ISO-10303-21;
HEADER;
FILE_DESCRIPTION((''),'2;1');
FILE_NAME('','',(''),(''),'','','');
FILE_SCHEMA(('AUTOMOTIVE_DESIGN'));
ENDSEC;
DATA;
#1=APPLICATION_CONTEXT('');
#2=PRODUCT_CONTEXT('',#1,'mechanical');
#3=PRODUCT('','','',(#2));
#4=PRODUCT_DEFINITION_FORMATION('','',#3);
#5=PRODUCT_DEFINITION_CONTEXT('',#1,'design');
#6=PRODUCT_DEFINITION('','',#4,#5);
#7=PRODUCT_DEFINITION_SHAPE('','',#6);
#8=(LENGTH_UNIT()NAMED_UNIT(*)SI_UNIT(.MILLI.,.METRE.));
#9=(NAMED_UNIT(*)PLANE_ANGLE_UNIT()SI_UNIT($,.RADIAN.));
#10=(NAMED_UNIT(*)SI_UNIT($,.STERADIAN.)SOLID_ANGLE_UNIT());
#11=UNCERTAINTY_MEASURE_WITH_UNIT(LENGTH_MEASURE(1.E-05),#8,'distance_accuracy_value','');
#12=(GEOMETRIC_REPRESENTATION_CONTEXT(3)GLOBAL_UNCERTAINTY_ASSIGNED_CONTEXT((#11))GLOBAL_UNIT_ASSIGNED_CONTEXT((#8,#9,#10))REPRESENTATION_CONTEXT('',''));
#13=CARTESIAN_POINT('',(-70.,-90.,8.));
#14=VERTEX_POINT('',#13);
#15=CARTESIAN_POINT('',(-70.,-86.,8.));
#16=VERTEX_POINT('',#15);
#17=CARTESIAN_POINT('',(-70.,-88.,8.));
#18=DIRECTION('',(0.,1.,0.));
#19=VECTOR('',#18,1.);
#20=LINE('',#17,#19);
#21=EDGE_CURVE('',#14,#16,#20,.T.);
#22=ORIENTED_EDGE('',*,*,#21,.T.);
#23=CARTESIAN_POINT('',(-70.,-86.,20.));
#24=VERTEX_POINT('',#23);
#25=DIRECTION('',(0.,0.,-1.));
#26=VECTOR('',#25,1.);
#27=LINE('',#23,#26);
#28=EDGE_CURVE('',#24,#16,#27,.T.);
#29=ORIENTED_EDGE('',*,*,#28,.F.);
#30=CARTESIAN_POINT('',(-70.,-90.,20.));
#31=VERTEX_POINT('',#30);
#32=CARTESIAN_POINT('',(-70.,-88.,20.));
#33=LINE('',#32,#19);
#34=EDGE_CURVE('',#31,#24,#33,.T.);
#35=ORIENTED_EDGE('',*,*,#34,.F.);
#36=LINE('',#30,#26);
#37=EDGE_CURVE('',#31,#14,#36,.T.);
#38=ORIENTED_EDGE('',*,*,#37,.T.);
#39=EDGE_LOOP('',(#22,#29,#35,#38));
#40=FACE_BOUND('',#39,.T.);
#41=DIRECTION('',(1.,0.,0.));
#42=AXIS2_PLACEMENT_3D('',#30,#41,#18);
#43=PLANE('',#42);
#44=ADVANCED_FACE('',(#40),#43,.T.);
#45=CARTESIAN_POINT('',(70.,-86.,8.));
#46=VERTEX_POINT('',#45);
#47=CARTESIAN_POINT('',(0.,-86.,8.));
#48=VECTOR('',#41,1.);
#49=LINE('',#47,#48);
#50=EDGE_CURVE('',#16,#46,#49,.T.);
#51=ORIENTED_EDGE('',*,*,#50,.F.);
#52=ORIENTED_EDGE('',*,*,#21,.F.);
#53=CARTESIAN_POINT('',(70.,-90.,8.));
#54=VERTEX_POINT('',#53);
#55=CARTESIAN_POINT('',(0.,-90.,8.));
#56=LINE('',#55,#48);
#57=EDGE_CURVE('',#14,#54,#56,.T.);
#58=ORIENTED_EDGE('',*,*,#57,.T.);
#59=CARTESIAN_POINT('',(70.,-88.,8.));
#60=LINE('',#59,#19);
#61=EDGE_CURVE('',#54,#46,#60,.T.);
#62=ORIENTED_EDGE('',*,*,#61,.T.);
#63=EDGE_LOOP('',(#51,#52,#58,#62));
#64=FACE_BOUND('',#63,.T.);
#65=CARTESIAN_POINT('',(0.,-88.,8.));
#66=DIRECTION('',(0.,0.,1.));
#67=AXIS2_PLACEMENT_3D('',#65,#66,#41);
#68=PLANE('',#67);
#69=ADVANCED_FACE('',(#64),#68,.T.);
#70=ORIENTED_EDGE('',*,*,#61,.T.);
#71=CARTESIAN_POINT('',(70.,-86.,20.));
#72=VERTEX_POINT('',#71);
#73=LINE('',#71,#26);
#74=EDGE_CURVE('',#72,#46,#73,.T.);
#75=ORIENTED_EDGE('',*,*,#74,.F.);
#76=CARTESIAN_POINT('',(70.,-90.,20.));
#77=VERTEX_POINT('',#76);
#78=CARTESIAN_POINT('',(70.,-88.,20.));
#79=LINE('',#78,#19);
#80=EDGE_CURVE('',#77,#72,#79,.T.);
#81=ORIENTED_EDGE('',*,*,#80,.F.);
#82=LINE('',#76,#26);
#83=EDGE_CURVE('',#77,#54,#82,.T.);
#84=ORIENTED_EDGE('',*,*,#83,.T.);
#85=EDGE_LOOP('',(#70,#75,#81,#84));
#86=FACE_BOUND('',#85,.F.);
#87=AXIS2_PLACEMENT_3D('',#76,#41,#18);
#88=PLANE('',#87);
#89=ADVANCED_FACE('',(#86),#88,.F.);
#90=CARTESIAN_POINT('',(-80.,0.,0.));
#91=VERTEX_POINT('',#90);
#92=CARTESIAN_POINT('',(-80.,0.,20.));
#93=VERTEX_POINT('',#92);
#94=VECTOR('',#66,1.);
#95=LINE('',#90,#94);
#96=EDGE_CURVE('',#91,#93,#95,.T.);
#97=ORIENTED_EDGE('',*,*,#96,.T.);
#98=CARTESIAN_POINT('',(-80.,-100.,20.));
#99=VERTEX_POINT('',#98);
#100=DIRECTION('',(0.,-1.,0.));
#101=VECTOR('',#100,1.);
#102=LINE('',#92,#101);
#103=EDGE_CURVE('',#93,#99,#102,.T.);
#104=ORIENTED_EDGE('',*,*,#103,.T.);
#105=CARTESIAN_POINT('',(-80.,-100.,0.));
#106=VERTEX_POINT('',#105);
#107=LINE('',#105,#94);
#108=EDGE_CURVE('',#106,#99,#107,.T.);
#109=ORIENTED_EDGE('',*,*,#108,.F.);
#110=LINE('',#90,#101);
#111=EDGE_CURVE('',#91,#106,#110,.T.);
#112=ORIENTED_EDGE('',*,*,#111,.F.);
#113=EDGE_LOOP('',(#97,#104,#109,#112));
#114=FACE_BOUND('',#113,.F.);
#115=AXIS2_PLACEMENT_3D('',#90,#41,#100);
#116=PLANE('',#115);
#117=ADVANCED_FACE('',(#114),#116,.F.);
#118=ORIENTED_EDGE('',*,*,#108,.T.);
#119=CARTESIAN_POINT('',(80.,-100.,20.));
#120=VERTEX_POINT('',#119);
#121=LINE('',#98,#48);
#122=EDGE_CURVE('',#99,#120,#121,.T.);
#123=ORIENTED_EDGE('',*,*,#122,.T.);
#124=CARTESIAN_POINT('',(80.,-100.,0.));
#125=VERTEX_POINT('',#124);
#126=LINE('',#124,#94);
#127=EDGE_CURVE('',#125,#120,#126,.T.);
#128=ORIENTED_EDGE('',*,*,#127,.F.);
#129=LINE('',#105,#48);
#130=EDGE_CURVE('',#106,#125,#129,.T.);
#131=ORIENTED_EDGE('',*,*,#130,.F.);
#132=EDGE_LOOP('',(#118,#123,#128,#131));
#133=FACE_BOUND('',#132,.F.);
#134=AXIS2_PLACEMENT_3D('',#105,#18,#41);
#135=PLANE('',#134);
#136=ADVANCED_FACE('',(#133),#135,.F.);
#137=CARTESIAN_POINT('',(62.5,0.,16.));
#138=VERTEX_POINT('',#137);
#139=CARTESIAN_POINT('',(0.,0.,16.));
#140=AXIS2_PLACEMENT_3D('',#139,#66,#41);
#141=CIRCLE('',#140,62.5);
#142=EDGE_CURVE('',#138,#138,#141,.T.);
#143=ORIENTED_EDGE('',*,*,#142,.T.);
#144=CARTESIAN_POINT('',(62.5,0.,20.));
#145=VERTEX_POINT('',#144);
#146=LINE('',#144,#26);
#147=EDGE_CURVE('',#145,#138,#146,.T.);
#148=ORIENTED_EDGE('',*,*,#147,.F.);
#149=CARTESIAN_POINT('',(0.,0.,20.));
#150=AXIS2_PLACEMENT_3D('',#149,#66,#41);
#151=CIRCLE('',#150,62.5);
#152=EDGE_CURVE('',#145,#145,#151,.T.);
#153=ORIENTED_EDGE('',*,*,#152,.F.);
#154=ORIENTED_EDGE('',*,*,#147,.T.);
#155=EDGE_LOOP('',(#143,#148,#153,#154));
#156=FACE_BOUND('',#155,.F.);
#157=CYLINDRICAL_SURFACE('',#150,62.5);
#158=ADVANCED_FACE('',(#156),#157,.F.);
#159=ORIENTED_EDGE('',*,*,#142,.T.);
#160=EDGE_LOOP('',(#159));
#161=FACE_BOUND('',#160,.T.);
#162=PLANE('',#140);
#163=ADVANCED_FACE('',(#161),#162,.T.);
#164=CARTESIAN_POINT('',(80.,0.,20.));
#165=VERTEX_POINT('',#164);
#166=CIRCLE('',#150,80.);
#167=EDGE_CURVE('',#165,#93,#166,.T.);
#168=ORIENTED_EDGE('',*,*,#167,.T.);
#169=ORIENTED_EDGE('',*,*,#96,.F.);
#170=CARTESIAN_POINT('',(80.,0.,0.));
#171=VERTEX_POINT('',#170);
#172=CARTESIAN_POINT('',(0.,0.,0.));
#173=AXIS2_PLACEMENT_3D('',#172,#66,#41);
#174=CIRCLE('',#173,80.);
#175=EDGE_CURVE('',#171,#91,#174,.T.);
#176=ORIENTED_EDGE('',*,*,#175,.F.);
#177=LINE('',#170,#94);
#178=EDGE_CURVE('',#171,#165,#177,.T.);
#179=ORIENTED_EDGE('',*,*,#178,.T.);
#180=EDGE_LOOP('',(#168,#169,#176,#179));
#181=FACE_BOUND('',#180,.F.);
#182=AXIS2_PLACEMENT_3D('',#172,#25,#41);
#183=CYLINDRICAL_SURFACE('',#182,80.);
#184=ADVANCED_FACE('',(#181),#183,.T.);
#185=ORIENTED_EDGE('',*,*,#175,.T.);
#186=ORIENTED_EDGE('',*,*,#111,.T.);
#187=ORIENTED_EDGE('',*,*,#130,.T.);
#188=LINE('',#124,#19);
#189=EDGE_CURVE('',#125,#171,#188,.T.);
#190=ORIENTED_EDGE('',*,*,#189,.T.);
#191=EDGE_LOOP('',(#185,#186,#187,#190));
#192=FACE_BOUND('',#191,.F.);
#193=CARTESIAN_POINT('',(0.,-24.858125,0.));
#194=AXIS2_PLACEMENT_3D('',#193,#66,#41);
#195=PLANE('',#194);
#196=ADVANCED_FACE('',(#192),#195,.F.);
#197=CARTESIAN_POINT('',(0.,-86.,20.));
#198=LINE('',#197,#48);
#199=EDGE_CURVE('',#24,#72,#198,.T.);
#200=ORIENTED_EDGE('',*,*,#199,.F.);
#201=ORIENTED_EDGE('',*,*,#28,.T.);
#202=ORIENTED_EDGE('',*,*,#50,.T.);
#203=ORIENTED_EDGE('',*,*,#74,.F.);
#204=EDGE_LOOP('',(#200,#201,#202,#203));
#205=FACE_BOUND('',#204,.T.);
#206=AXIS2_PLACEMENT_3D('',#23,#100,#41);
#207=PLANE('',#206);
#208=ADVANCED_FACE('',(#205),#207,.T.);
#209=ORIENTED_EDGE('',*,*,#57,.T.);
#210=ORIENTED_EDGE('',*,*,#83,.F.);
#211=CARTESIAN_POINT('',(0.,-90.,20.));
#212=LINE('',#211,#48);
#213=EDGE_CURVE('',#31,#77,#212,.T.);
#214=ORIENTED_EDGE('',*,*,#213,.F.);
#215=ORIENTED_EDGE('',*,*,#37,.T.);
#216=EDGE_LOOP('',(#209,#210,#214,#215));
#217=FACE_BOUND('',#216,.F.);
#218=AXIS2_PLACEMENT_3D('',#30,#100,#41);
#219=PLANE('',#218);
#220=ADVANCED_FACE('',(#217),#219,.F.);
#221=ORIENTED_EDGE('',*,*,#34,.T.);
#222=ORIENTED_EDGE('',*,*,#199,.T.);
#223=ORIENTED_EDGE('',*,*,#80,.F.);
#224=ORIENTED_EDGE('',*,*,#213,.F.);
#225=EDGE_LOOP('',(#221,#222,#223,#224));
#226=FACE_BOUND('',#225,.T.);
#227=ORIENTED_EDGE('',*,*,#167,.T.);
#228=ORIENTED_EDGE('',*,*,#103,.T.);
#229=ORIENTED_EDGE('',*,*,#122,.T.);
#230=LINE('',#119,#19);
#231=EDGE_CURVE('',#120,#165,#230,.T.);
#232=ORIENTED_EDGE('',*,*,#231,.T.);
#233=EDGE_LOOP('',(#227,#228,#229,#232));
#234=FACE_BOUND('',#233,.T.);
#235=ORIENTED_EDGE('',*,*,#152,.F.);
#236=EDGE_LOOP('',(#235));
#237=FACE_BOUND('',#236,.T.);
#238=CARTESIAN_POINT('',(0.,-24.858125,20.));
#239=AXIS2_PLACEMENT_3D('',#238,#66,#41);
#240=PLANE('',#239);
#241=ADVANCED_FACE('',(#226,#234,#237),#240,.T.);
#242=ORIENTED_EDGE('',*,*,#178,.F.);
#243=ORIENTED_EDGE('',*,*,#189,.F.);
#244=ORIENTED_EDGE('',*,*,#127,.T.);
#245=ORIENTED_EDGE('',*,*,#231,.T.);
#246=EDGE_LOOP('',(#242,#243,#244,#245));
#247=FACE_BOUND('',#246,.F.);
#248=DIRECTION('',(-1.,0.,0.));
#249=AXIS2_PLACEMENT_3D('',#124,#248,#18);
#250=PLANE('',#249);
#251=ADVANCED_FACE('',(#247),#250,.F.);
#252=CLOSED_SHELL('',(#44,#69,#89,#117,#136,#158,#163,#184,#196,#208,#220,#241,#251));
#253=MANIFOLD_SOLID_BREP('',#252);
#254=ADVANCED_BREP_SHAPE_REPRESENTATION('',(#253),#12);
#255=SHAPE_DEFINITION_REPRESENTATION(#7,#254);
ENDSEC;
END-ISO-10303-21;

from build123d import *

# Parameters (mm, degrees)
F1_DEPTH = 20
F2_R     = 62.5
F3_DEPTH = 4
F4_W     = 140
F4_H     = 4
F5_DEPTH = 12


# Not quite as in the source:
# - a feature of the source that left no trace in its solid (it failed there, or was rolled back) is left out


with BuildPart() as f1:
    # F0 (on Top) → F1 (new body)
    with BuildSketch(Plane.XY):
        with BuildLine():
            Line((80, -100), (80, 0))
            ThreePointArc((80, 0), (0, 80), (-80, 0))
            Line((-80, 0), (-80, -100))
            Line((-80, -100), (80, -100))
        make_face()
    extrude(amount=F1_DEPTH)

    # F2 (on face) → F3 (cut)
    with BuildSketch(Plane.XY.offset(20)):
        Circle(F2_R)
    extrude(amount=-F3_DEPTH, mode=Mode.SUBTRACT)

    # F4 (on face) → F5 (cut)
    with BuildSketch(Plane.XY.offset(20)):
        with Locations((0, -88)):
            Rectangle(F4_W, F4_H)
    extrude(amount=-F5_DEPTH, mode=Mode.SUBTRACT)


solid = f1.part
